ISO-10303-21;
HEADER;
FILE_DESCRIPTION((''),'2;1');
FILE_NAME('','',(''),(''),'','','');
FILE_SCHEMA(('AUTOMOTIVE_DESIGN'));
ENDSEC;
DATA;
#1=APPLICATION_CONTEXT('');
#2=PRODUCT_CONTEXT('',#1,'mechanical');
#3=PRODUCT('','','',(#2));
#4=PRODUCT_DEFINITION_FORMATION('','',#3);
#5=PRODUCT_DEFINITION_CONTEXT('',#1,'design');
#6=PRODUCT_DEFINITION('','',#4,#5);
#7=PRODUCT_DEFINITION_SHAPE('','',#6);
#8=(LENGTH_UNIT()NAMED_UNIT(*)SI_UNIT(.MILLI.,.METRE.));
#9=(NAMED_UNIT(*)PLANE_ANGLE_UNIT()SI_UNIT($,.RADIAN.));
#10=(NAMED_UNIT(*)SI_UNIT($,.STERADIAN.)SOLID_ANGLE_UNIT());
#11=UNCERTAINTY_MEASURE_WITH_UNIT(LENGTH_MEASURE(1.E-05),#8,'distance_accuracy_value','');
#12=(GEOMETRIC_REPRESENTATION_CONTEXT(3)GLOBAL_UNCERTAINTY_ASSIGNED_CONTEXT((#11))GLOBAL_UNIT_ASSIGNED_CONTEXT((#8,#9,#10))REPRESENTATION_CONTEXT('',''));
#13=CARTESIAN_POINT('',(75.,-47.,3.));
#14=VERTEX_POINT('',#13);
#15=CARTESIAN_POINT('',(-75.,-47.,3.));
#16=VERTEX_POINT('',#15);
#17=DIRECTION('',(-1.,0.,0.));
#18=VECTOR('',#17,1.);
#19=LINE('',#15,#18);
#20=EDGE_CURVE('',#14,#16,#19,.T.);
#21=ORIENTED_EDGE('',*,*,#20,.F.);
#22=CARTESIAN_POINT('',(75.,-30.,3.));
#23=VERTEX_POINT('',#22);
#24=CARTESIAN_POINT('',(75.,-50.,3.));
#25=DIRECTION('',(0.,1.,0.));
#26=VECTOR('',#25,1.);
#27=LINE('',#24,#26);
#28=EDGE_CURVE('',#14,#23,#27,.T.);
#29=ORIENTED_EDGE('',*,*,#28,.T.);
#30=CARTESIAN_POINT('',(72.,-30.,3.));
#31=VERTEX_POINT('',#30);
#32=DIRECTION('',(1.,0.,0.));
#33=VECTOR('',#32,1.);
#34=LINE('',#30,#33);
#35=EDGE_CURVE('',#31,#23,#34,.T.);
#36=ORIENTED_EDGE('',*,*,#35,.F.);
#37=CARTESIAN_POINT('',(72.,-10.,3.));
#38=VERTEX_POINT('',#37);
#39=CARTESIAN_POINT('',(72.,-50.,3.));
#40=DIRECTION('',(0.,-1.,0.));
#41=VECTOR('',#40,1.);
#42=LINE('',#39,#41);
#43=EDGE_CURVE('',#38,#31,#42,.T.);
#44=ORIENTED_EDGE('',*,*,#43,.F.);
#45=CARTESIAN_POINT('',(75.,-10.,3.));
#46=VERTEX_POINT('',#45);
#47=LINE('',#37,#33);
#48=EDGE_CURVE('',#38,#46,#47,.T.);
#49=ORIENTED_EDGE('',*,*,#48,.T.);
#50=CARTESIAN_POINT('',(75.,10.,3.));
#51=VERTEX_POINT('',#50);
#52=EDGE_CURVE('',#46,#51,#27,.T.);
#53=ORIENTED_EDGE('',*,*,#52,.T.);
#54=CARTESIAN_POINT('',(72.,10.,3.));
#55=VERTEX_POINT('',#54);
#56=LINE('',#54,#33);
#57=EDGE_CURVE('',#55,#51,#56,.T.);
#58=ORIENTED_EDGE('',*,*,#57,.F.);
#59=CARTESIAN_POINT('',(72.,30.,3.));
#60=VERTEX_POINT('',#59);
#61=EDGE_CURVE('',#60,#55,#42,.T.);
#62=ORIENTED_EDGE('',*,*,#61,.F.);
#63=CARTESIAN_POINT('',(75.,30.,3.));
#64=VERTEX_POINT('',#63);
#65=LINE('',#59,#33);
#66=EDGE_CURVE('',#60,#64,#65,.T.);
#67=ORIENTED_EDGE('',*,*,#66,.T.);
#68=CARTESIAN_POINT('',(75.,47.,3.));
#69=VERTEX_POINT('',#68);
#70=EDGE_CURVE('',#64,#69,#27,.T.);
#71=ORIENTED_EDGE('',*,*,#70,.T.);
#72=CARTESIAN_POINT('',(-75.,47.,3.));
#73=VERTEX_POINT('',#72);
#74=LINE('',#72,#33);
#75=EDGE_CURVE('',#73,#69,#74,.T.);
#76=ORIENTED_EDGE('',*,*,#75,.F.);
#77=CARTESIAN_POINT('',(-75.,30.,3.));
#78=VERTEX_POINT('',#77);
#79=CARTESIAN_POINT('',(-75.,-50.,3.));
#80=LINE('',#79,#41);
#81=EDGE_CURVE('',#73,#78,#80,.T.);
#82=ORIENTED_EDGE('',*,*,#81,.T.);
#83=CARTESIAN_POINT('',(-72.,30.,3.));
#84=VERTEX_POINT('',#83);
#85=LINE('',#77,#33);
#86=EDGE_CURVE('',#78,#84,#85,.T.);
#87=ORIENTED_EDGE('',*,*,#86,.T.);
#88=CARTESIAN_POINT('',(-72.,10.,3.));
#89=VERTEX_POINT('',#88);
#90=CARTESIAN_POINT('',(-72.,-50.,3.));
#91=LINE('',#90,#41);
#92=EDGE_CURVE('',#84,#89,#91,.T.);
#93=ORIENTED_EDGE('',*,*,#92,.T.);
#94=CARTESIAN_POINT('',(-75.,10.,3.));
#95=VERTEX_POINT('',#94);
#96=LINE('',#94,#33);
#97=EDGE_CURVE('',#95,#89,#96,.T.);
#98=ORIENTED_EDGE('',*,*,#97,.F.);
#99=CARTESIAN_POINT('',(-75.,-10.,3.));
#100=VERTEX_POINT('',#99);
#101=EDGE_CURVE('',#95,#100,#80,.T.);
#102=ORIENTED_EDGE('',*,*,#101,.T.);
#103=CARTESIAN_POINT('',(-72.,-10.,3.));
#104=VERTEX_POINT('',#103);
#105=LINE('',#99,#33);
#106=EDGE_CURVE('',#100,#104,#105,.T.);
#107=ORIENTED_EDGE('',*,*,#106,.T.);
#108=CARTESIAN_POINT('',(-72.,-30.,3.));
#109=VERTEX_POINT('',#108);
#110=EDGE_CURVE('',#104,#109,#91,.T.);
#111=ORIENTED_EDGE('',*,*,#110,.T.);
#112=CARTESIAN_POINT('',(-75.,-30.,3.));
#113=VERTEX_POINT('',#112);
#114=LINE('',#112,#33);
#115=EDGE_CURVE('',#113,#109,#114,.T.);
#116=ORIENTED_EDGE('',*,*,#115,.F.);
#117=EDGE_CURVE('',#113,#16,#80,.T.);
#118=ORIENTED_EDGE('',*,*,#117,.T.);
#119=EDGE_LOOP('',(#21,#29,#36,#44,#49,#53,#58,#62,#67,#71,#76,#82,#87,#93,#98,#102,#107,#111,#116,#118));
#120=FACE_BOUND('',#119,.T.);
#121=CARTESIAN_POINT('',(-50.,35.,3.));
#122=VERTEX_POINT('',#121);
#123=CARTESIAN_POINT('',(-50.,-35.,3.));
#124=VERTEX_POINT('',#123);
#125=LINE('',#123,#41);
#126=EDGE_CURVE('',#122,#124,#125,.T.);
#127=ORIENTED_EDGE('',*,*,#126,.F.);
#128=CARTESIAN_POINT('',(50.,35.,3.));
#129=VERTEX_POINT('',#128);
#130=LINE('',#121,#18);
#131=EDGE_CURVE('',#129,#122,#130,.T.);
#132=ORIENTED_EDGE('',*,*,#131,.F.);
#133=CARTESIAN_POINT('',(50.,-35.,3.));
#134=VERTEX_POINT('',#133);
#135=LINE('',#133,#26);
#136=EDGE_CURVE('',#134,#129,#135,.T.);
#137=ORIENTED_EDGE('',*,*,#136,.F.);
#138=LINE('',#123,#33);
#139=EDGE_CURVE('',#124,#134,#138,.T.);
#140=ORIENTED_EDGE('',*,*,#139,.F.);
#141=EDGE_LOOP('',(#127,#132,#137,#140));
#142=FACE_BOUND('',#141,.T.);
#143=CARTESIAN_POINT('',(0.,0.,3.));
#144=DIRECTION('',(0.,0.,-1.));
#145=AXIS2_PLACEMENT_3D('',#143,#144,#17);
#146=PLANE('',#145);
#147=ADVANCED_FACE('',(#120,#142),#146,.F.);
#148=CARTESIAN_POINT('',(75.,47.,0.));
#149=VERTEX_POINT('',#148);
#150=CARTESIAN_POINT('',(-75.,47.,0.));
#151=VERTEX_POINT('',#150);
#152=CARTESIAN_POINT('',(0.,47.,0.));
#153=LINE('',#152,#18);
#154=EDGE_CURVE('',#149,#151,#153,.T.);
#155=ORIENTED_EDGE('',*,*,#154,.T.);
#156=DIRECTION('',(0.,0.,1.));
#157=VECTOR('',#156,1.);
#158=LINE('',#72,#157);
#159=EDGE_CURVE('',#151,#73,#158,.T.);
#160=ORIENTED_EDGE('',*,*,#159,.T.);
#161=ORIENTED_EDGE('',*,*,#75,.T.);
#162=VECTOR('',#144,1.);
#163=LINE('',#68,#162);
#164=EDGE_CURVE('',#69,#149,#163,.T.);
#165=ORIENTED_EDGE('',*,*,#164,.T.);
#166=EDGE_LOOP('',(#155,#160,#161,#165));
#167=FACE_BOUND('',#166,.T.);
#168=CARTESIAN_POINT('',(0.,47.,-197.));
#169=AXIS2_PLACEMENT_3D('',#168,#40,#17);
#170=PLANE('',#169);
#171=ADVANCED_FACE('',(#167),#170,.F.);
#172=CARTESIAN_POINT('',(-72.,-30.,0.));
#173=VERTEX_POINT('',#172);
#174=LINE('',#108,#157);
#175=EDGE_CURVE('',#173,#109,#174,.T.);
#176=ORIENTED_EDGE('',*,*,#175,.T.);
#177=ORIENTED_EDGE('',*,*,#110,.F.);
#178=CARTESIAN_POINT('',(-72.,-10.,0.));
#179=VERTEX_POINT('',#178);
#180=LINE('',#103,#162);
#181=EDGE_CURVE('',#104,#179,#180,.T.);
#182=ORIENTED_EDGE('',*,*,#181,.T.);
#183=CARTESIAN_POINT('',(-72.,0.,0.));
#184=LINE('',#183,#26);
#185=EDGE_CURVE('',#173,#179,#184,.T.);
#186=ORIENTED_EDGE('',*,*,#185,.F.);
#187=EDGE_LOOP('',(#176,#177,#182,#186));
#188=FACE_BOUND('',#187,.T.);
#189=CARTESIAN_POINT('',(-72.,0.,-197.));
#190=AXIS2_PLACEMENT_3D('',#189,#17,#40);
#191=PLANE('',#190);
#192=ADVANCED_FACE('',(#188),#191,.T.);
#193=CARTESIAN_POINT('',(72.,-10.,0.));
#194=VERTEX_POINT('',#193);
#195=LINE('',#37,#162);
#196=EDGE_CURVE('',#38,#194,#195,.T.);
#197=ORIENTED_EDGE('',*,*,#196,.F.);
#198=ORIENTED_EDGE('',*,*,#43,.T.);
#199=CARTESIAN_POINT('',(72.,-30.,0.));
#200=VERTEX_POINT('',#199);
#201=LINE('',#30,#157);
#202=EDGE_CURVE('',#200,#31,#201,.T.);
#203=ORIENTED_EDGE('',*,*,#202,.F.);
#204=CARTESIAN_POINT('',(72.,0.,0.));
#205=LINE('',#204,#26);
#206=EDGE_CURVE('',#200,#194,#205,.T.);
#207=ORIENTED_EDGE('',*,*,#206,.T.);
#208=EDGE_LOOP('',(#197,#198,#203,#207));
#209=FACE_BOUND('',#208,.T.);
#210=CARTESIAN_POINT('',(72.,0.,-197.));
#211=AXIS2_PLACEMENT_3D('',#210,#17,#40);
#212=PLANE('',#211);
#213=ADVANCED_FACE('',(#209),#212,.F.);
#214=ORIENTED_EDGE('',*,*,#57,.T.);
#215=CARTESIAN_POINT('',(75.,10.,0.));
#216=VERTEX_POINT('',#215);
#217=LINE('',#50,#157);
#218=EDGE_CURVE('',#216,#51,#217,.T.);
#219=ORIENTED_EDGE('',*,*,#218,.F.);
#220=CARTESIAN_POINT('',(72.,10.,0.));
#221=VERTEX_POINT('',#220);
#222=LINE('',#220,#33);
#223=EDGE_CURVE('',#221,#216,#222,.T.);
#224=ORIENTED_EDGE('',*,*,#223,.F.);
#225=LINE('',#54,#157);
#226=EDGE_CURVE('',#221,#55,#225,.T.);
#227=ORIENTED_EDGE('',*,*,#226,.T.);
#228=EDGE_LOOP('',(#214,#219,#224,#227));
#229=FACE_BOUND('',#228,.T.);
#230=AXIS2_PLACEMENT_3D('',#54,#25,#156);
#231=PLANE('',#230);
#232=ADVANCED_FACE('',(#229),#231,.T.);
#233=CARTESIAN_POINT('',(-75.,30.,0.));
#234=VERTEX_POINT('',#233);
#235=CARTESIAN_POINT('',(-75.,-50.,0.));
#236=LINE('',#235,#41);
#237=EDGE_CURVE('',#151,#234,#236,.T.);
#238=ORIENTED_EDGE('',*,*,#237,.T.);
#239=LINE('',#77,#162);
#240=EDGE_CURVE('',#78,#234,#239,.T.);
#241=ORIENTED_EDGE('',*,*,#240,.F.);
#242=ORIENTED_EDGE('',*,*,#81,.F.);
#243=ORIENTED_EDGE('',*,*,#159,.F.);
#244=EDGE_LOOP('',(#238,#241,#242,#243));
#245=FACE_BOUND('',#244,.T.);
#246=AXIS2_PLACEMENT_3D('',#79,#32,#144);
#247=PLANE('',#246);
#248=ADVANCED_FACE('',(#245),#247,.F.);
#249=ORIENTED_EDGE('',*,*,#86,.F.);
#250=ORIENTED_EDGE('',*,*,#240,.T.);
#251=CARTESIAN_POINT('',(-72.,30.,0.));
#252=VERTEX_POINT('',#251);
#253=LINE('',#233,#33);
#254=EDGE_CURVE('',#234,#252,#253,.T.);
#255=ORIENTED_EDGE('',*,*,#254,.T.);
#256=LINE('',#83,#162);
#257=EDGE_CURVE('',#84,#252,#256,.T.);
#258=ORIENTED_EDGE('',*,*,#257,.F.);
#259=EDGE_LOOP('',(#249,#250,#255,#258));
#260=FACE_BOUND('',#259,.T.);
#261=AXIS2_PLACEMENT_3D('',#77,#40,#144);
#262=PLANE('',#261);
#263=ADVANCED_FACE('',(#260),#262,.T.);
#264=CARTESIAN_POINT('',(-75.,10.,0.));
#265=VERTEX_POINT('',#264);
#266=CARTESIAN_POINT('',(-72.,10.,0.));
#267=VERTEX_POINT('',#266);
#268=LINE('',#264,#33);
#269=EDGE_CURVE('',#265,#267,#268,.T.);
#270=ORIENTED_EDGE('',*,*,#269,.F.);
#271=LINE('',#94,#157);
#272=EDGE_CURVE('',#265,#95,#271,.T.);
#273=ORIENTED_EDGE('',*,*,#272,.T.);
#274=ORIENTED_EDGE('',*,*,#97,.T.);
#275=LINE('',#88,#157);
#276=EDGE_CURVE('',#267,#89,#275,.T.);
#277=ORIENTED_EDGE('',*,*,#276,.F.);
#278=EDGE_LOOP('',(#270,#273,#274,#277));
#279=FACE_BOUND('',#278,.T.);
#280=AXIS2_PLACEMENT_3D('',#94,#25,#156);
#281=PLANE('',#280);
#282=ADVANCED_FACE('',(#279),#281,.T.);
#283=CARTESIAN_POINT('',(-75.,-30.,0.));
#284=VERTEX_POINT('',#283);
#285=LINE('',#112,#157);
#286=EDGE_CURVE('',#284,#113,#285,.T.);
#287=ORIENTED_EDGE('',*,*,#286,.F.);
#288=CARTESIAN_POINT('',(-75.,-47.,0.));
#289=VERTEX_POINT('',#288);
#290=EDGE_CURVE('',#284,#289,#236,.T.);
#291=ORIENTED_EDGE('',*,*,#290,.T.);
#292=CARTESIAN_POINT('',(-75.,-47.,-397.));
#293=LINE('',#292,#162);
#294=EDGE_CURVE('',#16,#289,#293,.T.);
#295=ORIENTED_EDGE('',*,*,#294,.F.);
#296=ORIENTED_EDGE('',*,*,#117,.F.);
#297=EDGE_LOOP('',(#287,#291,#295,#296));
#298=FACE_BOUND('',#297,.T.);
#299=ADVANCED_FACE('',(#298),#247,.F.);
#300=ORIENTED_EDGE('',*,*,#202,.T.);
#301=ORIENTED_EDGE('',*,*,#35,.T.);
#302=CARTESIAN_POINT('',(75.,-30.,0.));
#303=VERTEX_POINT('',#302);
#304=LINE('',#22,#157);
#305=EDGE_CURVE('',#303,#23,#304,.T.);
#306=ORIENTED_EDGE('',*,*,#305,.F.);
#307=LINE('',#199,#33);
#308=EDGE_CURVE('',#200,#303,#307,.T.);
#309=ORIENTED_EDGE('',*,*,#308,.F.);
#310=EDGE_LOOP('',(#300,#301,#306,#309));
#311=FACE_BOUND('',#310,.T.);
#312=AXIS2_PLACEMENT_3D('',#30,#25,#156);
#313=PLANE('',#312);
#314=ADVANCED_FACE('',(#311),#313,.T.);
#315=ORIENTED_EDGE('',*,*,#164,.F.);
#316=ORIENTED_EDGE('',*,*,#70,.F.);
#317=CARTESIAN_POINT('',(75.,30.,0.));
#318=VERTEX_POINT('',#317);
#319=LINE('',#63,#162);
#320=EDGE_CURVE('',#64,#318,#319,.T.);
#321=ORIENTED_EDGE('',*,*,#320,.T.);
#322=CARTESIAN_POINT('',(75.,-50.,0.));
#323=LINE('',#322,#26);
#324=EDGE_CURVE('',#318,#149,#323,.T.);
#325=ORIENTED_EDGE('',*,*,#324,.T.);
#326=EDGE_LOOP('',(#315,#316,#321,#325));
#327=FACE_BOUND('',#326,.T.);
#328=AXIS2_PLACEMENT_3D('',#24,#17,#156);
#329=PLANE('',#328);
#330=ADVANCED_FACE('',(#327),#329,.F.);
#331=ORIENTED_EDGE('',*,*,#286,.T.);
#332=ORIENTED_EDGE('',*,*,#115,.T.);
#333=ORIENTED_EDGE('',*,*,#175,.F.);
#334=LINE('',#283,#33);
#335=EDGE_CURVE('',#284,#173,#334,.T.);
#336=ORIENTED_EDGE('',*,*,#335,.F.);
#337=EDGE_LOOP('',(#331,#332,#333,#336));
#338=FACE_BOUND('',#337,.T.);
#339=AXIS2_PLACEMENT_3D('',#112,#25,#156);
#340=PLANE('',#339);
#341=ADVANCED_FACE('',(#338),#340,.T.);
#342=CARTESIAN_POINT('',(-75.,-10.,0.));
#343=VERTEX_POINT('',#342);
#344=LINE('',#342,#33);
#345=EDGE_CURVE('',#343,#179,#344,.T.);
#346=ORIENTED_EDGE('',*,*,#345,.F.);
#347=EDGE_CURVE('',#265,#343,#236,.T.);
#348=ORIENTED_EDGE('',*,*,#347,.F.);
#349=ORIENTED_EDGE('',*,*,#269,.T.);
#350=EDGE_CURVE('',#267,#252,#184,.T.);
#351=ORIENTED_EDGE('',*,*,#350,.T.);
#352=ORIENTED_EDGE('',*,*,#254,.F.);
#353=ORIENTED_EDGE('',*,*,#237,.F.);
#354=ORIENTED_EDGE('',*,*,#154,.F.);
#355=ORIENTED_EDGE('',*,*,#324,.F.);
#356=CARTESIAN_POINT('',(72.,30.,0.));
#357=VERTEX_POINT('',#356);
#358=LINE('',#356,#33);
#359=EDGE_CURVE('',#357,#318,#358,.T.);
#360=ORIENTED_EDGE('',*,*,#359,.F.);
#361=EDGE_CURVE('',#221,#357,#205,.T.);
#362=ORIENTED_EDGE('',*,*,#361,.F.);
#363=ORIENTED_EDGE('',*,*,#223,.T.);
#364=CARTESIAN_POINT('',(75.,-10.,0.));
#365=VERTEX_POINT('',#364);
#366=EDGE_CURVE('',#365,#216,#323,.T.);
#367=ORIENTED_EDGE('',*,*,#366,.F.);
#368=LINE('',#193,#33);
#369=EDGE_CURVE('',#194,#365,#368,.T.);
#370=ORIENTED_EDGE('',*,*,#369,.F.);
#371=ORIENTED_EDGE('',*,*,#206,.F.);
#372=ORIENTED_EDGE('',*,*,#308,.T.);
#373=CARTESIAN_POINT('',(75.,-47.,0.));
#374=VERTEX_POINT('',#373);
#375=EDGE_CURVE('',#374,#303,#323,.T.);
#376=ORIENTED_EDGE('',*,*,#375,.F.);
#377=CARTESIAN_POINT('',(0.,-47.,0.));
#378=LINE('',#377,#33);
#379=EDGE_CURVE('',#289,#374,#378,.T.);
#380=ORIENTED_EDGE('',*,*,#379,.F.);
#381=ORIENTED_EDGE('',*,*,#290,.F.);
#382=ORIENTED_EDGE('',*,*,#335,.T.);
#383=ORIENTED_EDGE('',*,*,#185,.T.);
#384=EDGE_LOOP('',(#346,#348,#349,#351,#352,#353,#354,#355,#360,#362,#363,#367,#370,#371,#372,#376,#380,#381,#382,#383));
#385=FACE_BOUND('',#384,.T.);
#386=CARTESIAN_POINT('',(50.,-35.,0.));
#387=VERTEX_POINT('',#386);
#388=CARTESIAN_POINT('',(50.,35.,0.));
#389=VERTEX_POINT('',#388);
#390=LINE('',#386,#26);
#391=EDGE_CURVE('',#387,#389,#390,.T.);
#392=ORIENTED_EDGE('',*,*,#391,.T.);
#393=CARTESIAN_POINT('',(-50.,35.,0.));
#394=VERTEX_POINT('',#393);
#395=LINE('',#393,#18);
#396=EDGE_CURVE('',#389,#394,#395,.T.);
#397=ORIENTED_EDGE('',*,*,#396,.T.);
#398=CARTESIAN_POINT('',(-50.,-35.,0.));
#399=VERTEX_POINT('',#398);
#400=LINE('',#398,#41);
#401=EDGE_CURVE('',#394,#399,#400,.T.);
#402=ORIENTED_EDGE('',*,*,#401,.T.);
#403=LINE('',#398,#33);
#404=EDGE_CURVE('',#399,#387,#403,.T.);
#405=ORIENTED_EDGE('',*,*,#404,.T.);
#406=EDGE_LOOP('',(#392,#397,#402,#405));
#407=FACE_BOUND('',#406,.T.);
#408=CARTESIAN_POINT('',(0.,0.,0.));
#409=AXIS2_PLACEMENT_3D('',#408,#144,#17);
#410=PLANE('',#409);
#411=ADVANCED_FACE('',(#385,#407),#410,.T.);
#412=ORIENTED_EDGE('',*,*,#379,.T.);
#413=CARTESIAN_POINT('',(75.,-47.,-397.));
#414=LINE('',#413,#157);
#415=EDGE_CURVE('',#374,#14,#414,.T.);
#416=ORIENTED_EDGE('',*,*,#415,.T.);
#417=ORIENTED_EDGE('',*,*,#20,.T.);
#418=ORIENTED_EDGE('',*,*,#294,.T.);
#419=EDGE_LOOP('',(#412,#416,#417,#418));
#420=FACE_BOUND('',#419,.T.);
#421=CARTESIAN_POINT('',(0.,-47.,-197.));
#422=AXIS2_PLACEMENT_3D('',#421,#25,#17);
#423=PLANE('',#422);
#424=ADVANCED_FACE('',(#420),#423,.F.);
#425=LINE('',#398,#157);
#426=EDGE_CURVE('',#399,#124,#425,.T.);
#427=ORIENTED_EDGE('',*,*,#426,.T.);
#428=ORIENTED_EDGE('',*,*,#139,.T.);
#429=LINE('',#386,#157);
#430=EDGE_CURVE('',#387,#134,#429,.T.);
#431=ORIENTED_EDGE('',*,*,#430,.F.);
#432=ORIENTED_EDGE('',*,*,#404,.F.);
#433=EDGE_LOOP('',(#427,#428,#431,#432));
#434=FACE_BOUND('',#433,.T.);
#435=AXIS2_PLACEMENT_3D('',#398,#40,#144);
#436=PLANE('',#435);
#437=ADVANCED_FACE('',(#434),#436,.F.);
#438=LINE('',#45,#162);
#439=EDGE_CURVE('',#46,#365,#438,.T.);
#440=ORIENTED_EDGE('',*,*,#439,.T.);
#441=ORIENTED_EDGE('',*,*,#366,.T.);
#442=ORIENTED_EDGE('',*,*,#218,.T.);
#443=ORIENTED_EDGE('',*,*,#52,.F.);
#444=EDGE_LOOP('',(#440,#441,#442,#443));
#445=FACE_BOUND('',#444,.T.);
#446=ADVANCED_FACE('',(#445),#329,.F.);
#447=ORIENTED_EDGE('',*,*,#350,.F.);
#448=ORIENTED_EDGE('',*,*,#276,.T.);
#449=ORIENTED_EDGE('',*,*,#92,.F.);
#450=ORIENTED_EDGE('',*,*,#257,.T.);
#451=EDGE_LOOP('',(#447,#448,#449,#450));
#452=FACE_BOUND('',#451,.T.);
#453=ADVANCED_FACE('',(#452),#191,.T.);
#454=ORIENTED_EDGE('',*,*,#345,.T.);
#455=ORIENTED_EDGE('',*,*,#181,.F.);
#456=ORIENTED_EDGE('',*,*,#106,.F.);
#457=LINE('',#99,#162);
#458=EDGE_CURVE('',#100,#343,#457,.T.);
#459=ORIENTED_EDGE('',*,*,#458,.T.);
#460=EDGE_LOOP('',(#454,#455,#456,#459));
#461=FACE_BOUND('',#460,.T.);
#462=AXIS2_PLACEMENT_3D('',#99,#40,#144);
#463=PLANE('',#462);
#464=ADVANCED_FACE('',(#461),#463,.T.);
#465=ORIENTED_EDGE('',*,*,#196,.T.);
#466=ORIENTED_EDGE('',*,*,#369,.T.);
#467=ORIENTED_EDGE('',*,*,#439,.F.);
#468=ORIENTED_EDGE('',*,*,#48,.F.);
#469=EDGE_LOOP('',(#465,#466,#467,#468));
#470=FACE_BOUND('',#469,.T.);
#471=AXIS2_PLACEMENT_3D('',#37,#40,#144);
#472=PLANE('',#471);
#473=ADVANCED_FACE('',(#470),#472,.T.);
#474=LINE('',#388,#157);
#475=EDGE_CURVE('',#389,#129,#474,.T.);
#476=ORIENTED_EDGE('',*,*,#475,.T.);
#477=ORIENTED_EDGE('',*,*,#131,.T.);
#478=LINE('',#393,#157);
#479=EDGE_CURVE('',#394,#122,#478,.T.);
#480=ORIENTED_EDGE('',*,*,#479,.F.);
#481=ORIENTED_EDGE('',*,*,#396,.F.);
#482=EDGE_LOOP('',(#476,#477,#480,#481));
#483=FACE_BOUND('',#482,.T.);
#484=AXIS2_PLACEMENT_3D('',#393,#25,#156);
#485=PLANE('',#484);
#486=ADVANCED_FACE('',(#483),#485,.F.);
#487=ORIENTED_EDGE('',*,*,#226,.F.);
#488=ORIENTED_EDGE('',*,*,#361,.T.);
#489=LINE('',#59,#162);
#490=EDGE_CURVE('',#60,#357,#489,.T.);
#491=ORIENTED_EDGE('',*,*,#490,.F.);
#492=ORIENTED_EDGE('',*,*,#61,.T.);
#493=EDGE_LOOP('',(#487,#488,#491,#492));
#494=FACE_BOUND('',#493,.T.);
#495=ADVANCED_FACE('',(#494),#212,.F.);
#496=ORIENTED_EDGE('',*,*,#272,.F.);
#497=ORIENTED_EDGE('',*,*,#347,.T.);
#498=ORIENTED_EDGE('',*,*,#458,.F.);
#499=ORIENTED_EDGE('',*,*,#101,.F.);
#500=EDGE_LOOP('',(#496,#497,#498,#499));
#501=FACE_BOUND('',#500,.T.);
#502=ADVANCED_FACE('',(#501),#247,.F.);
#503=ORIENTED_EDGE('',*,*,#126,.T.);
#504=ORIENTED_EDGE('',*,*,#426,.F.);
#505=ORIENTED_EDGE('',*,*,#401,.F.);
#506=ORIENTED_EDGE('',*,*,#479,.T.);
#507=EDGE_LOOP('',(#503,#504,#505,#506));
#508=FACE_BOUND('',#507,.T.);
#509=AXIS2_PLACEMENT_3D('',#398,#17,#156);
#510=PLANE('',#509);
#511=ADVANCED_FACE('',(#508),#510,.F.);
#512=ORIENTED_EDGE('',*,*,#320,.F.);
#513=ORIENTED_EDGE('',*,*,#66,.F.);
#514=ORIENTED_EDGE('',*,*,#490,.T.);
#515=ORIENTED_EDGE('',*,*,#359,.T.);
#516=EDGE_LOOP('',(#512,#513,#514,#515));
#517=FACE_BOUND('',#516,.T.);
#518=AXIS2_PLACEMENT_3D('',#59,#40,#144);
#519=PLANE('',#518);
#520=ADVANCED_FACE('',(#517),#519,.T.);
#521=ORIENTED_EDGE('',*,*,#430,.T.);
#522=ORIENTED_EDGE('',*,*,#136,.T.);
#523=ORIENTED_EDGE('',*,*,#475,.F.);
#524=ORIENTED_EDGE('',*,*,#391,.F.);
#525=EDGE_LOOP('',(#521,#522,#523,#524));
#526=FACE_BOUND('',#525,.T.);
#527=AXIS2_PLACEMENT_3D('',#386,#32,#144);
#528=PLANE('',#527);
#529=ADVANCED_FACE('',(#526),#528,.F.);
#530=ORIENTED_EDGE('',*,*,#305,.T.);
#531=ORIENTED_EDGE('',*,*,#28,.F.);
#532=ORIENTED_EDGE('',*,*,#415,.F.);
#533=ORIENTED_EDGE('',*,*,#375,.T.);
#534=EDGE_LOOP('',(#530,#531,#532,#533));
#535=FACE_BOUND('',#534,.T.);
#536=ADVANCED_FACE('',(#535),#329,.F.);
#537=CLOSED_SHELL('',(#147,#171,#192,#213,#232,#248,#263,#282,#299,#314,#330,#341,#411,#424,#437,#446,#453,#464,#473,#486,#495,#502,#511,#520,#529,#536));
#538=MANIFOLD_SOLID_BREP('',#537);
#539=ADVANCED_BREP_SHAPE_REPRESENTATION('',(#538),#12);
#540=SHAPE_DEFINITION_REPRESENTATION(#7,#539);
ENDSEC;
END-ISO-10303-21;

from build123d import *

# Parameters (mm, degrees)
SKETCH1_W           = 150
SKETCH1_H           = 100
BOSS_EXTRUDE1_DEPTH = 3
CAVITY1_START       = -75
CAVITY1_OUTLINE_W   = 3
CAVITY1_OUTLINE_H   = 3
CAVITY1_DEPTH       = 150
CAVITY1_2_OUTLINE_W = 20
CAVITY1_2_OUTLINE_H = 3
CAVITY1_2_DEPTH     = 3
CAVITY1_START_2     = 72
CAVITY1_3_OUTLINE_W = 20
CAVITY1_3_OUTLINE_H = 3
CAVITY1_3_DEPTH     = 3
SKETCH2_W           = 100
SKETCH2_H           = 70
CUT_EXTRUDE1_DEPTH  = 3


# Read off the part's stored shape, not the designer's step: Cavity1
with BuildPart() as part:
    # Sketch1 → Boss-Extrude1 (new body)
    with BuildSketch(Plane.XY):
        Rectangle(SKETCH1_W, SKETCH1_H)
    extrude(amount=BOSS_EXTRUDE1_DEPTH)

    # Cavity1 outline → Cavity1 (cut)
    with BuildSketch(Plane.YZ.offset(CAVITY1_START)):
        with Locations((48.5, 1.5)):
            Rectangle(CAVITY1_OUTLINE_W, CAVITY1_OUTLINE_H)
        with Locations((-48.5, 1.5)):
            Rectangle(CAVITY1_OUTLINE_W, CAVITY1_OUTLINE_H)
    extrude(amount=CAVITY1_DEPTH, mode=Mode.SUBTRACT)

    # Cavity1 2 outline → Cavity1 2 (cut)
    with BuildSketch(Plane.YZ.offset(CAVITY1_START)):
        with Locations((20, 1.5)):
            Rectangle(CAVITY1_2_OUTLINE_W, CAVITY1_2_OUTLINE_H)
        with Locations((-20, 1.5)):
            Rectangle(CAVITY1_2_OUTLINE_W, CAVITY1_2_OUTLINE_H)
    extrude(amount=CAVITY1_2_DEPTH, mode=Mode.SUBTRACT)

    # Cavity1 3 outline → Cavity1 3 (cut)
    with BuildSketch(Plane.YZ.offset(CAVITY1_START_2)):
        with Locations((20, 1.5)):
            Rectangle(CAVITY1_3_OUTLINE_W, CAVITY1_3_OUTLINE_H)
        with Locations((-20, 1.5)):
            Rectangle(CAVITY1_3_OUTLINE_W, CAVITY1_3_OUTLINE_H)
    extrude(amount=CAVITY1_3_DEPTH, mode=Mode.SUBTRACT)

    # Sketch2 → Cut-Extrude1 (cut)
    with BuildSketch(Plane.XY.offset(3)):
        Rectangle(SKETCH2_W, SKETCH2_H)
    extrude(amount=-CUT_EXTRUDE1_DEPTH, mode=Mode.SUBTRACT)


solid = part.part
